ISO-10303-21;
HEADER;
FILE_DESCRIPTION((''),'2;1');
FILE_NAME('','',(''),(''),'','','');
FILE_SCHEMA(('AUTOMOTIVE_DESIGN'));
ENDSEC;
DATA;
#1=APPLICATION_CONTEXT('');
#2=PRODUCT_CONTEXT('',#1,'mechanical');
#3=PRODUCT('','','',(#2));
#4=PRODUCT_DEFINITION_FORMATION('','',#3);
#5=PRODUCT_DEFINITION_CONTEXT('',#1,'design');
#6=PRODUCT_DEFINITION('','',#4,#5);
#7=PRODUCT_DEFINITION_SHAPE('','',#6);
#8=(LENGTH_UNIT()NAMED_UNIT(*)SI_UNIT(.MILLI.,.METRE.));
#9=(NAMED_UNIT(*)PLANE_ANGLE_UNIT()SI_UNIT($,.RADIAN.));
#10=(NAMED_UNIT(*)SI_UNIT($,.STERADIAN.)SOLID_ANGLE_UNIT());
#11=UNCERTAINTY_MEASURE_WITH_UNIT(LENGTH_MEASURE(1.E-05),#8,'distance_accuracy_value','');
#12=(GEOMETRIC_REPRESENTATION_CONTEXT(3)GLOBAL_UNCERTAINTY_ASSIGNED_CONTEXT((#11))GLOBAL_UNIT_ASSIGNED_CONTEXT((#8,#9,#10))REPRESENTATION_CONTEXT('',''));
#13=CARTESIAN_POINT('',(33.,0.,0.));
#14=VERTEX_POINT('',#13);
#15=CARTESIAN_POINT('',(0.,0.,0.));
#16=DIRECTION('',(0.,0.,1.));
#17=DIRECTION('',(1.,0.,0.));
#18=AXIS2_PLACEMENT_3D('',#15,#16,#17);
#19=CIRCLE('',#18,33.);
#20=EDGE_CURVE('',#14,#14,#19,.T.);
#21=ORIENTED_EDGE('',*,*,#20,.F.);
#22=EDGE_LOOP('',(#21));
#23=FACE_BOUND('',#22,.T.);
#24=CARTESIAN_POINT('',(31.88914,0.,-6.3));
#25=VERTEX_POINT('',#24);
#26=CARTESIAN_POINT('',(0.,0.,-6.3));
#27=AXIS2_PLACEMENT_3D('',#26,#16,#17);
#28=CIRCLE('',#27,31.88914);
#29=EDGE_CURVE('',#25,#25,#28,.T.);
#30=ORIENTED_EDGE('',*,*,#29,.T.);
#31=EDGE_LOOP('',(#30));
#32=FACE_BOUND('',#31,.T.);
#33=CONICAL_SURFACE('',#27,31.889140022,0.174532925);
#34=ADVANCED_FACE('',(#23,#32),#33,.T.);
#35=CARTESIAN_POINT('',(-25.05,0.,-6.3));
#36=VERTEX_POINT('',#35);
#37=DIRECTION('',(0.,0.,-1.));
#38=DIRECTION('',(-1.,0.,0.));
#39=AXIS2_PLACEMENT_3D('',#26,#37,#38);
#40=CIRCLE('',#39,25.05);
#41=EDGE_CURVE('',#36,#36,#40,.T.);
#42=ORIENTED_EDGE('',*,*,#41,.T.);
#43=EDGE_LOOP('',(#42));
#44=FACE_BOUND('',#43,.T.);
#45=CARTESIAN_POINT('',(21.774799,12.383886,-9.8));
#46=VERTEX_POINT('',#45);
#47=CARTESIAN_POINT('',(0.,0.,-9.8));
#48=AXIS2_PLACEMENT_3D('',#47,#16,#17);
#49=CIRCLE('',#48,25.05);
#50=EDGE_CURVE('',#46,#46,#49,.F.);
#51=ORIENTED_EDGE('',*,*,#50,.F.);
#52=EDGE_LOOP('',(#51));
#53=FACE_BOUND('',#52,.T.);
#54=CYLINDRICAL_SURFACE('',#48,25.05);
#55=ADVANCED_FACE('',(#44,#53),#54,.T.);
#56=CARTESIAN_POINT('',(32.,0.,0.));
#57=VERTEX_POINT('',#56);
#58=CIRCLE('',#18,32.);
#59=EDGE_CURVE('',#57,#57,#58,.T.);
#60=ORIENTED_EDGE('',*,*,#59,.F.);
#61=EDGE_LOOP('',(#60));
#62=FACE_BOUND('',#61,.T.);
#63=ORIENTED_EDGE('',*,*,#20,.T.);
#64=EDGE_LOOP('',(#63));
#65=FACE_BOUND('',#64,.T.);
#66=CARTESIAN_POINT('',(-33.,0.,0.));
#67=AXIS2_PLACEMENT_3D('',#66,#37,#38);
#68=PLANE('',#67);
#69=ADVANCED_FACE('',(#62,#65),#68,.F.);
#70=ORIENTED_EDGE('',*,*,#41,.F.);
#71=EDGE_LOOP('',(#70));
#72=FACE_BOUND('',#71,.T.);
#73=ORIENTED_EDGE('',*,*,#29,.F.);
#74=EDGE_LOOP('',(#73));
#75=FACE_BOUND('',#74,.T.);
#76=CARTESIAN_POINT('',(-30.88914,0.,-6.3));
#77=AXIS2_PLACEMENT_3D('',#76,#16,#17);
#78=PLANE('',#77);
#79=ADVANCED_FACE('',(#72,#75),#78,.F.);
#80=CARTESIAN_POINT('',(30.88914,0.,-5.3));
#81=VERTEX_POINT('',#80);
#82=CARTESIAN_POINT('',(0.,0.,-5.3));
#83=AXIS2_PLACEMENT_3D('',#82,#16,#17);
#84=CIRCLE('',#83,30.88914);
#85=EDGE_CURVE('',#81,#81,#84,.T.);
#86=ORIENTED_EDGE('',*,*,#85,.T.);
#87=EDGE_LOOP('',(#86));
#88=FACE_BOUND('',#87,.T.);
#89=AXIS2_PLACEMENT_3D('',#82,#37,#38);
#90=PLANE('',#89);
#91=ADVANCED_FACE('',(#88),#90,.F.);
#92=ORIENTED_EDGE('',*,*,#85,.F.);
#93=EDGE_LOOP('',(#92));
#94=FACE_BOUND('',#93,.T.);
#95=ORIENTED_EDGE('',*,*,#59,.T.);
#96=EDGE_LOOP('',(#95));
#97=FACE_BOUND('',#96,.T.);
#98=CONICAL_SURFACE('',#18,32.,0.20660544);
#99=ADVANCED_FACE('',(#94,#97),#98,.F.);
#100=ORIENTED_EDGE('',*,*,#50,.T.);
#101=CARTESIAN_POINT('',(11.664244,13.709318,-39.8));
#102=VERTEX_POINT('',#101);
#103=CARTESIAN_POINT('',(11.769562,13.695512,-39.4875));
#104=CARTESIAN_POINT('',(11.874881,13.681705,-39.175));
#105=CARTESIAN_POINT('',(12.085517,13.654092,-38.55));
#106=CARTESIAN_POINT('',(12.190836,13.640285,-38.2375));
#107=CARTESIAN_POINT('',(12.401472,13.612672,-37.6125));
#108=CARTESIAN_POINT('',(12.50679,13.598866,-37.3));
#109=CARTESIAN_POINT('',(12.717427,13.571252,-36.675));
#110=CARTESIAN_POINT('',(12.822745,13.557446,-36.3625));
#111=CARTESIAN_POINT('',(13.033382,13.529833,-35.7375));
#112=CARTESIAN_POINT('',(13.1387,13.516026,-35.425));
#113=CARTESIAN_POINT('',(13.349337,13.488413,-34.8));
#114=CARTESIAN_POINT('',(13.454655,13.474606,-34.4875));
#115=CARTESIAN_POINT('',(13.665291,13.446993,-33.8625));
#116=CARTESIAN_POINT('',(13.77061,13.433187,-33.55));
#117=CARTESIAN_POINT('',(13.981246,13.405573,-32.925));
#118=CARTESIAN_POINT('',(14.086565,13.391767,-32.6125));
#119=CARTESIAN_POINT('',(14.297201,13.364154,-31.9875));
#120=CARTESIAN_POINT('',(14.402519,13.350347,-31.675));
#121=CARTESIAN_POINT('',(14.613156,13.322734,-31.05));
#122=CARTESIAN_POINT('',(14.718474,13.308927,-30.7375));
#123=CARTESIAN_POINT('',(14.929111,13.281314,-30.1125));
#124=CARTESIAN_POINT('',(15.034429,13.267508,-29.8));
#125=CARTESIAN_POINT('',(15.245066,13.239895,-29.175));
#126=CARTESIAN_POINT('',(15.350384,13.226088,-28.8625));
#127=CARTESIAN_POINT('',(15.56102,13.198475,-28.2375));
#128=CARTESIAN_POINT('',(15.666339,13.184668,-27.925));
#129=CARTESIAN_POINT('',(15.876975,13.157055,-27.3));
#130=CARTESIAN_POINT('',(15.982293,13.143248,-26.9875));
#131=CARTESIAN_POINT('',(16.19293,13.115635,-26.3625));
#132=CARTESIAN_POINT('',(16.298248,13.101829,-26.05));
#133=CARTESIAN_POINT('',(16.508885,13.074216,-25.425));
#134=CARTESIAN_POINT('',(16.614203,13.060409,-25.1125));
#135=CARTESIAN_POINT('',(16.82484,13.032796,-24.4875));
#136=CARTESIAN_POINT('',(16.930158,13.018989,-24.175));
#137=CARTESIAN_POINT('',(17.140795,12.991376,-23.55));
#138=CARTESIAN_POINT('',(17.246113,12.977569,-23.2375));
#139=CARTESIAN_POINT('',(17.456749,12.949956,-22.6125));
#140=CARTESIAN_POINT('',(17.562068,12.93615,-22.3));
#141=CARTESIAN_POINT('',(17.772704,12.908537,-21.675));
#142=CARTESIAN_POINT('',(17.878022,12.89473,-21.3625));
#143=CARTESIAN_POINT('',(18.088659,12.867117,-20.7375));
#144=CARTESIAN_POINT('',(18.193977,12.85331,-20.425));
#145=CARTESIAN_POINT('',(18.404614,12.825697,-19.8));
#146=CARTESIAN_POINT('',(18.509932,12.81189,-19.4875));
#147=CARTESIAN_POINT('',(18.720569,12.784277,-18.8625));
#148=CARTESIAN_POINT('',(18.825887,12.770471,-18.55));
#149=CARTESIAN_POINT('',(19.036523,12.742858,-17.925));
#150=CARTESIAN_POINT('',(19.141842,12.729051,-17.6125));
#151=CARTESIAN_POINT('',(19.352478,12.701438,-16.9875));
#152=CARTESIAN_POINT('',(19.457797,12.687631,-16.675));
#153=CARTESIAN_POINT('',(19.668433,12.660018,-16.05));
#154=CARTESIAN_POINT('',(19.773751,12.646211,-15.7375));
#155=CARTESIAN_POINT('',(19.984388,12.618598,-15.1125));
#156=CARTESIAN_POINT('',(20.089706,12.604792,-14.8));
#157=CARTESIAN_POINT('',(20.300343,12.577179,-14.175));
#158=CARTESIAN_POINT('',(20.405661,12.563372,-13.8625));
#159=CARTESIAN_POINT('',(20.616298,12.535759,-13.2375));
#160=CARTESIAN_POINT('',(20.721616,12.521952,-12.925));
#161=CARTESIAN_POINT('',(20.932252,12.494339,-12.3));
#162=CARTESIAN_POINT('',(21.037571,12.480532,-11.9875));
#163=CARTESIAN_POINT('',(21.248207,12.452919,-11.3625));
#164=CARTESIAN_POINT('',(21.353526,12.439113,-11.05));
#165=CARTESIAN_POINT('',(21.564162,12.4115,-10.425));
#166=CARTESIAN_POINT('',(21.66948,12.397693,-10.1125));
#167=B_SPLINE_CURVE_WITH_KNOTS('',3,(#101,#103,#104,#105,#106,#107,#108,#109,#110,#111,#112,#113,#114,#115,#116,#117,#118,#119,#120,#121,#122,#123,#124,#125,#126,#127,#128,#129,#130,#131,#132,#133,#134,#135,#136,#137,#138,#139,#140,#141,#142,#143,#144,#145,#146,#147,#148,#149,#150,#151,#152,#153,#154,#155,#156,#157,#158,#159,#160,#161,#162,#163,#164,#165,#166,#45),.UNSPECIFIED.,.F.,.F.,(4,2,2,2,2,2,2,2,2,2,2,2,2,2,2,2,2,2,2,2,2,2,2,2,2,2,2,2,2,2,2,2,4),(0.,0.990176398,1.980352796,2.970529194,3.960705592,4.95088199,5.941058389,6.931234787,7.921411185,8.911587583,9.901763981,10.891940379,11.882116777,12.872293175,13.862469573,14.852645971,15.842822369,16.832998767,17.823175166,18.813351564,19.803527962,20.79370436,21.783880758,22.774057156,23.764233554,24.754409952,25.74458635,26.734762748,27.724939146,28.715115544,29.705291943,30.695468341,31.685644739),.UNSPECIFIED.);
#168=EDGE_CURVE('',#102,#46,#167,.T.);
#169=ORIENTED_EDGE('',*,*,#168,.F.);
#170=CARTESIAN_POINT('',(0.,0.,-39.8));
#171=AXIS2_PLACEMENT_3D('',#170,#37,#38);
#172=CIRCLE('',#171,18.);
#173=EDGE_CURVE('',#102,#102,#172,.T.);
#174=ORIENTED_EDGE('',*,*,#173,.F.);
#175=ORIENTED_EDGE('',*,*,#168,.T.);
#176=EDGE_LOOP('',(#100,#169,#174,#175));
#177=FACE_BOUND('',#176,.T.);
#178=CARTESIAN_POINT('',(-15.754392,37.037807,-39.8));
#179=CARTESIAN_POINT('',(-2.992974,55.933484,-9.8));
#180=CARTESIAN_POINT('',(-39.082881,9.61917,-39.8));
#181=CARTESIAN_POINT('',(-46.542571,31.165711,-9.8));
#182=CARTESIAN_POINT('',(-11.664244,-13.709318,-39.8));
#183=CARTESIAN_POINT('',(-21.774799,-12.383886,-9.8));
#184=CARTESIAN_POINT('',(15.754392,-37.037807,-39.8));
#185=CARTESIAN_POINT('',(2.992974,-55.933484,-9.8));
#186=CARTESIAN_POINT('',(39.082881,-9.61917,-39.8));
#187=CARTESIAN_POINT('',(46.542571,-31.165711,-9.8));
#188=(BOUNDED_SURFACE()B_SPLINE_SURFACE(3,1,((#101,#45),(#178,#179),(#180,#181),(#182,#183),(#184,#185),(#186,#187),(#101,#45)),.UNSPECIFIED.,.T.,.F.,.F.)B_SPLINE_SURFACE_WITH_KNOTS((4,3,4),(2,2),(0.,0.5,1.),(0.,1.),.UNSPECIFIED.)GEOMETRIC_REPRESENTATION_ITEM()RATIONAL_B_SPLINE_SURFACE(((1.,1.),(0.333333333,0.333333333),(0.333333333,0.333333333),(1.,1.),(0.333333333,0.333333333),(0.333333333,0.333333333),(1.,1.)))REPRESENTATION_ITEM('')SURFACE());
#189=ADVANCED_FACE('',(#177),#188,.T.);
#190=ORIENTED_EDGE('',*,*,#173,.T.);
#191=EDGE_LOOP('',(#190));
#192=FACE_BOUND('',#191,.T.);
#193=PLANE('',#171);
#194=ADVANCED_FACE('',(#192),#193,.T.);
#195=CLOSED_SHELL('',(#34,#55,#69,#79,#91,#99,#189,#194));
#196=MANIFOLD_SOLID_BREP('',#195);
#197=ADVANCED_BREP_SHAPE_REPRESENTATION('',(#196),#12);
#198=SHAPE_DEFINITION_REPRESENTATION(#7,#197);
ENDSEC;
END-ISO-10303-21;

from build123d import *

# Parameters (mm, degrees)
IZIM3_R                     = 25.05
Y_KSEKLIK_EKSTR_ZYON1_DEPTH = 3.5


with BuildPart() as part:
    # Çizim2 → Döndür1 (revolve)
    with BuildSketch(Plane(origin=(0, 0, 0), x_dir=(1, 0, 0), z_dir=(0, 1, 0)), mode=Mode.PRIVATE) as d_nd_r1_sk:
        Polygon((-33, 0), (-31.889140022, 6.3), (-30.889140022, 6.3), (0, 6.3), (0, 5.3), (-30.889140022, 5.3), (-32, 0), align=None)
    revolve(d_nd_r1_sk.sketch.rotate(Axis((0, 0, 0), (0, 0, -1)), 180), axis=Axis((0, 0, 0), (0, 0, -1)))

    # Çizim3 → Yükseklik-Ekstrüzyon1 (add)
    with BuildSketch(Plane(origin=(0, 0, -6.3), x_dir=(-1, 0, 0), z_dir=(0, 0, -1))):
        Circle(IZIM3_R)
    extrude(amount=Y_KSEKLIK_EKSTR_ZYON1_DEPTH)

    # Loft1: read off the stored shape, not the designer's step
    # Loft1: loft between two sections, ruled curve by curve
    loft1_from = [
        Edge.make_bspline([(11.664244151, 13.709318305, -39.8), (-15.754392459, 37.037806607, -39.8), (-39.082880761, 9.619169997, -39.8), (-11.664244151, -13.709318305, -39.8), (15.754392459, -37.037806607, -39.8), (39.082880761, -9.619169997, -39.8), (11.664244151, 13.709318305, -39.8)], [0, 0, 0, 0, 0.5, 0.5, 0.5, 1, 1, 1, 1], 3, [1, 0.333333333, 0.333333333, 1, 0.333333333, 0.333333333, 1]),
    ]
    loft1_to = [
        Edge.make_bspline([(21.774798676, 12.38388641, -9.8), (-2.992974145, 55.933483762, -9.8), (-46.542571497, 31.165710941, -9.8), (-21.774798676, -12.38388641, -9.8), (2.992974145, -55.933483762, -9.8), (46.542571497, -31.165710941, -9.8), (21.774798676, 12.38388641, -9.8)], [0, 0, 0, 0, 0.5, 0.5, 0.5, 1, 1, 1, 1], 3, [1, 0.333333333, 0.333333333, 1, 0.333333333, 0.333333333, 1]),
    ]
    loft1 = Solid(Shell([*[Face.make_surface_from_curves(loft1_from[k], loft1_to[k]) for k in range(1)], Face(Wire(loft1_from)), Face(Wire(loft1_to))]))
    add(loft1)


solid = part.part
